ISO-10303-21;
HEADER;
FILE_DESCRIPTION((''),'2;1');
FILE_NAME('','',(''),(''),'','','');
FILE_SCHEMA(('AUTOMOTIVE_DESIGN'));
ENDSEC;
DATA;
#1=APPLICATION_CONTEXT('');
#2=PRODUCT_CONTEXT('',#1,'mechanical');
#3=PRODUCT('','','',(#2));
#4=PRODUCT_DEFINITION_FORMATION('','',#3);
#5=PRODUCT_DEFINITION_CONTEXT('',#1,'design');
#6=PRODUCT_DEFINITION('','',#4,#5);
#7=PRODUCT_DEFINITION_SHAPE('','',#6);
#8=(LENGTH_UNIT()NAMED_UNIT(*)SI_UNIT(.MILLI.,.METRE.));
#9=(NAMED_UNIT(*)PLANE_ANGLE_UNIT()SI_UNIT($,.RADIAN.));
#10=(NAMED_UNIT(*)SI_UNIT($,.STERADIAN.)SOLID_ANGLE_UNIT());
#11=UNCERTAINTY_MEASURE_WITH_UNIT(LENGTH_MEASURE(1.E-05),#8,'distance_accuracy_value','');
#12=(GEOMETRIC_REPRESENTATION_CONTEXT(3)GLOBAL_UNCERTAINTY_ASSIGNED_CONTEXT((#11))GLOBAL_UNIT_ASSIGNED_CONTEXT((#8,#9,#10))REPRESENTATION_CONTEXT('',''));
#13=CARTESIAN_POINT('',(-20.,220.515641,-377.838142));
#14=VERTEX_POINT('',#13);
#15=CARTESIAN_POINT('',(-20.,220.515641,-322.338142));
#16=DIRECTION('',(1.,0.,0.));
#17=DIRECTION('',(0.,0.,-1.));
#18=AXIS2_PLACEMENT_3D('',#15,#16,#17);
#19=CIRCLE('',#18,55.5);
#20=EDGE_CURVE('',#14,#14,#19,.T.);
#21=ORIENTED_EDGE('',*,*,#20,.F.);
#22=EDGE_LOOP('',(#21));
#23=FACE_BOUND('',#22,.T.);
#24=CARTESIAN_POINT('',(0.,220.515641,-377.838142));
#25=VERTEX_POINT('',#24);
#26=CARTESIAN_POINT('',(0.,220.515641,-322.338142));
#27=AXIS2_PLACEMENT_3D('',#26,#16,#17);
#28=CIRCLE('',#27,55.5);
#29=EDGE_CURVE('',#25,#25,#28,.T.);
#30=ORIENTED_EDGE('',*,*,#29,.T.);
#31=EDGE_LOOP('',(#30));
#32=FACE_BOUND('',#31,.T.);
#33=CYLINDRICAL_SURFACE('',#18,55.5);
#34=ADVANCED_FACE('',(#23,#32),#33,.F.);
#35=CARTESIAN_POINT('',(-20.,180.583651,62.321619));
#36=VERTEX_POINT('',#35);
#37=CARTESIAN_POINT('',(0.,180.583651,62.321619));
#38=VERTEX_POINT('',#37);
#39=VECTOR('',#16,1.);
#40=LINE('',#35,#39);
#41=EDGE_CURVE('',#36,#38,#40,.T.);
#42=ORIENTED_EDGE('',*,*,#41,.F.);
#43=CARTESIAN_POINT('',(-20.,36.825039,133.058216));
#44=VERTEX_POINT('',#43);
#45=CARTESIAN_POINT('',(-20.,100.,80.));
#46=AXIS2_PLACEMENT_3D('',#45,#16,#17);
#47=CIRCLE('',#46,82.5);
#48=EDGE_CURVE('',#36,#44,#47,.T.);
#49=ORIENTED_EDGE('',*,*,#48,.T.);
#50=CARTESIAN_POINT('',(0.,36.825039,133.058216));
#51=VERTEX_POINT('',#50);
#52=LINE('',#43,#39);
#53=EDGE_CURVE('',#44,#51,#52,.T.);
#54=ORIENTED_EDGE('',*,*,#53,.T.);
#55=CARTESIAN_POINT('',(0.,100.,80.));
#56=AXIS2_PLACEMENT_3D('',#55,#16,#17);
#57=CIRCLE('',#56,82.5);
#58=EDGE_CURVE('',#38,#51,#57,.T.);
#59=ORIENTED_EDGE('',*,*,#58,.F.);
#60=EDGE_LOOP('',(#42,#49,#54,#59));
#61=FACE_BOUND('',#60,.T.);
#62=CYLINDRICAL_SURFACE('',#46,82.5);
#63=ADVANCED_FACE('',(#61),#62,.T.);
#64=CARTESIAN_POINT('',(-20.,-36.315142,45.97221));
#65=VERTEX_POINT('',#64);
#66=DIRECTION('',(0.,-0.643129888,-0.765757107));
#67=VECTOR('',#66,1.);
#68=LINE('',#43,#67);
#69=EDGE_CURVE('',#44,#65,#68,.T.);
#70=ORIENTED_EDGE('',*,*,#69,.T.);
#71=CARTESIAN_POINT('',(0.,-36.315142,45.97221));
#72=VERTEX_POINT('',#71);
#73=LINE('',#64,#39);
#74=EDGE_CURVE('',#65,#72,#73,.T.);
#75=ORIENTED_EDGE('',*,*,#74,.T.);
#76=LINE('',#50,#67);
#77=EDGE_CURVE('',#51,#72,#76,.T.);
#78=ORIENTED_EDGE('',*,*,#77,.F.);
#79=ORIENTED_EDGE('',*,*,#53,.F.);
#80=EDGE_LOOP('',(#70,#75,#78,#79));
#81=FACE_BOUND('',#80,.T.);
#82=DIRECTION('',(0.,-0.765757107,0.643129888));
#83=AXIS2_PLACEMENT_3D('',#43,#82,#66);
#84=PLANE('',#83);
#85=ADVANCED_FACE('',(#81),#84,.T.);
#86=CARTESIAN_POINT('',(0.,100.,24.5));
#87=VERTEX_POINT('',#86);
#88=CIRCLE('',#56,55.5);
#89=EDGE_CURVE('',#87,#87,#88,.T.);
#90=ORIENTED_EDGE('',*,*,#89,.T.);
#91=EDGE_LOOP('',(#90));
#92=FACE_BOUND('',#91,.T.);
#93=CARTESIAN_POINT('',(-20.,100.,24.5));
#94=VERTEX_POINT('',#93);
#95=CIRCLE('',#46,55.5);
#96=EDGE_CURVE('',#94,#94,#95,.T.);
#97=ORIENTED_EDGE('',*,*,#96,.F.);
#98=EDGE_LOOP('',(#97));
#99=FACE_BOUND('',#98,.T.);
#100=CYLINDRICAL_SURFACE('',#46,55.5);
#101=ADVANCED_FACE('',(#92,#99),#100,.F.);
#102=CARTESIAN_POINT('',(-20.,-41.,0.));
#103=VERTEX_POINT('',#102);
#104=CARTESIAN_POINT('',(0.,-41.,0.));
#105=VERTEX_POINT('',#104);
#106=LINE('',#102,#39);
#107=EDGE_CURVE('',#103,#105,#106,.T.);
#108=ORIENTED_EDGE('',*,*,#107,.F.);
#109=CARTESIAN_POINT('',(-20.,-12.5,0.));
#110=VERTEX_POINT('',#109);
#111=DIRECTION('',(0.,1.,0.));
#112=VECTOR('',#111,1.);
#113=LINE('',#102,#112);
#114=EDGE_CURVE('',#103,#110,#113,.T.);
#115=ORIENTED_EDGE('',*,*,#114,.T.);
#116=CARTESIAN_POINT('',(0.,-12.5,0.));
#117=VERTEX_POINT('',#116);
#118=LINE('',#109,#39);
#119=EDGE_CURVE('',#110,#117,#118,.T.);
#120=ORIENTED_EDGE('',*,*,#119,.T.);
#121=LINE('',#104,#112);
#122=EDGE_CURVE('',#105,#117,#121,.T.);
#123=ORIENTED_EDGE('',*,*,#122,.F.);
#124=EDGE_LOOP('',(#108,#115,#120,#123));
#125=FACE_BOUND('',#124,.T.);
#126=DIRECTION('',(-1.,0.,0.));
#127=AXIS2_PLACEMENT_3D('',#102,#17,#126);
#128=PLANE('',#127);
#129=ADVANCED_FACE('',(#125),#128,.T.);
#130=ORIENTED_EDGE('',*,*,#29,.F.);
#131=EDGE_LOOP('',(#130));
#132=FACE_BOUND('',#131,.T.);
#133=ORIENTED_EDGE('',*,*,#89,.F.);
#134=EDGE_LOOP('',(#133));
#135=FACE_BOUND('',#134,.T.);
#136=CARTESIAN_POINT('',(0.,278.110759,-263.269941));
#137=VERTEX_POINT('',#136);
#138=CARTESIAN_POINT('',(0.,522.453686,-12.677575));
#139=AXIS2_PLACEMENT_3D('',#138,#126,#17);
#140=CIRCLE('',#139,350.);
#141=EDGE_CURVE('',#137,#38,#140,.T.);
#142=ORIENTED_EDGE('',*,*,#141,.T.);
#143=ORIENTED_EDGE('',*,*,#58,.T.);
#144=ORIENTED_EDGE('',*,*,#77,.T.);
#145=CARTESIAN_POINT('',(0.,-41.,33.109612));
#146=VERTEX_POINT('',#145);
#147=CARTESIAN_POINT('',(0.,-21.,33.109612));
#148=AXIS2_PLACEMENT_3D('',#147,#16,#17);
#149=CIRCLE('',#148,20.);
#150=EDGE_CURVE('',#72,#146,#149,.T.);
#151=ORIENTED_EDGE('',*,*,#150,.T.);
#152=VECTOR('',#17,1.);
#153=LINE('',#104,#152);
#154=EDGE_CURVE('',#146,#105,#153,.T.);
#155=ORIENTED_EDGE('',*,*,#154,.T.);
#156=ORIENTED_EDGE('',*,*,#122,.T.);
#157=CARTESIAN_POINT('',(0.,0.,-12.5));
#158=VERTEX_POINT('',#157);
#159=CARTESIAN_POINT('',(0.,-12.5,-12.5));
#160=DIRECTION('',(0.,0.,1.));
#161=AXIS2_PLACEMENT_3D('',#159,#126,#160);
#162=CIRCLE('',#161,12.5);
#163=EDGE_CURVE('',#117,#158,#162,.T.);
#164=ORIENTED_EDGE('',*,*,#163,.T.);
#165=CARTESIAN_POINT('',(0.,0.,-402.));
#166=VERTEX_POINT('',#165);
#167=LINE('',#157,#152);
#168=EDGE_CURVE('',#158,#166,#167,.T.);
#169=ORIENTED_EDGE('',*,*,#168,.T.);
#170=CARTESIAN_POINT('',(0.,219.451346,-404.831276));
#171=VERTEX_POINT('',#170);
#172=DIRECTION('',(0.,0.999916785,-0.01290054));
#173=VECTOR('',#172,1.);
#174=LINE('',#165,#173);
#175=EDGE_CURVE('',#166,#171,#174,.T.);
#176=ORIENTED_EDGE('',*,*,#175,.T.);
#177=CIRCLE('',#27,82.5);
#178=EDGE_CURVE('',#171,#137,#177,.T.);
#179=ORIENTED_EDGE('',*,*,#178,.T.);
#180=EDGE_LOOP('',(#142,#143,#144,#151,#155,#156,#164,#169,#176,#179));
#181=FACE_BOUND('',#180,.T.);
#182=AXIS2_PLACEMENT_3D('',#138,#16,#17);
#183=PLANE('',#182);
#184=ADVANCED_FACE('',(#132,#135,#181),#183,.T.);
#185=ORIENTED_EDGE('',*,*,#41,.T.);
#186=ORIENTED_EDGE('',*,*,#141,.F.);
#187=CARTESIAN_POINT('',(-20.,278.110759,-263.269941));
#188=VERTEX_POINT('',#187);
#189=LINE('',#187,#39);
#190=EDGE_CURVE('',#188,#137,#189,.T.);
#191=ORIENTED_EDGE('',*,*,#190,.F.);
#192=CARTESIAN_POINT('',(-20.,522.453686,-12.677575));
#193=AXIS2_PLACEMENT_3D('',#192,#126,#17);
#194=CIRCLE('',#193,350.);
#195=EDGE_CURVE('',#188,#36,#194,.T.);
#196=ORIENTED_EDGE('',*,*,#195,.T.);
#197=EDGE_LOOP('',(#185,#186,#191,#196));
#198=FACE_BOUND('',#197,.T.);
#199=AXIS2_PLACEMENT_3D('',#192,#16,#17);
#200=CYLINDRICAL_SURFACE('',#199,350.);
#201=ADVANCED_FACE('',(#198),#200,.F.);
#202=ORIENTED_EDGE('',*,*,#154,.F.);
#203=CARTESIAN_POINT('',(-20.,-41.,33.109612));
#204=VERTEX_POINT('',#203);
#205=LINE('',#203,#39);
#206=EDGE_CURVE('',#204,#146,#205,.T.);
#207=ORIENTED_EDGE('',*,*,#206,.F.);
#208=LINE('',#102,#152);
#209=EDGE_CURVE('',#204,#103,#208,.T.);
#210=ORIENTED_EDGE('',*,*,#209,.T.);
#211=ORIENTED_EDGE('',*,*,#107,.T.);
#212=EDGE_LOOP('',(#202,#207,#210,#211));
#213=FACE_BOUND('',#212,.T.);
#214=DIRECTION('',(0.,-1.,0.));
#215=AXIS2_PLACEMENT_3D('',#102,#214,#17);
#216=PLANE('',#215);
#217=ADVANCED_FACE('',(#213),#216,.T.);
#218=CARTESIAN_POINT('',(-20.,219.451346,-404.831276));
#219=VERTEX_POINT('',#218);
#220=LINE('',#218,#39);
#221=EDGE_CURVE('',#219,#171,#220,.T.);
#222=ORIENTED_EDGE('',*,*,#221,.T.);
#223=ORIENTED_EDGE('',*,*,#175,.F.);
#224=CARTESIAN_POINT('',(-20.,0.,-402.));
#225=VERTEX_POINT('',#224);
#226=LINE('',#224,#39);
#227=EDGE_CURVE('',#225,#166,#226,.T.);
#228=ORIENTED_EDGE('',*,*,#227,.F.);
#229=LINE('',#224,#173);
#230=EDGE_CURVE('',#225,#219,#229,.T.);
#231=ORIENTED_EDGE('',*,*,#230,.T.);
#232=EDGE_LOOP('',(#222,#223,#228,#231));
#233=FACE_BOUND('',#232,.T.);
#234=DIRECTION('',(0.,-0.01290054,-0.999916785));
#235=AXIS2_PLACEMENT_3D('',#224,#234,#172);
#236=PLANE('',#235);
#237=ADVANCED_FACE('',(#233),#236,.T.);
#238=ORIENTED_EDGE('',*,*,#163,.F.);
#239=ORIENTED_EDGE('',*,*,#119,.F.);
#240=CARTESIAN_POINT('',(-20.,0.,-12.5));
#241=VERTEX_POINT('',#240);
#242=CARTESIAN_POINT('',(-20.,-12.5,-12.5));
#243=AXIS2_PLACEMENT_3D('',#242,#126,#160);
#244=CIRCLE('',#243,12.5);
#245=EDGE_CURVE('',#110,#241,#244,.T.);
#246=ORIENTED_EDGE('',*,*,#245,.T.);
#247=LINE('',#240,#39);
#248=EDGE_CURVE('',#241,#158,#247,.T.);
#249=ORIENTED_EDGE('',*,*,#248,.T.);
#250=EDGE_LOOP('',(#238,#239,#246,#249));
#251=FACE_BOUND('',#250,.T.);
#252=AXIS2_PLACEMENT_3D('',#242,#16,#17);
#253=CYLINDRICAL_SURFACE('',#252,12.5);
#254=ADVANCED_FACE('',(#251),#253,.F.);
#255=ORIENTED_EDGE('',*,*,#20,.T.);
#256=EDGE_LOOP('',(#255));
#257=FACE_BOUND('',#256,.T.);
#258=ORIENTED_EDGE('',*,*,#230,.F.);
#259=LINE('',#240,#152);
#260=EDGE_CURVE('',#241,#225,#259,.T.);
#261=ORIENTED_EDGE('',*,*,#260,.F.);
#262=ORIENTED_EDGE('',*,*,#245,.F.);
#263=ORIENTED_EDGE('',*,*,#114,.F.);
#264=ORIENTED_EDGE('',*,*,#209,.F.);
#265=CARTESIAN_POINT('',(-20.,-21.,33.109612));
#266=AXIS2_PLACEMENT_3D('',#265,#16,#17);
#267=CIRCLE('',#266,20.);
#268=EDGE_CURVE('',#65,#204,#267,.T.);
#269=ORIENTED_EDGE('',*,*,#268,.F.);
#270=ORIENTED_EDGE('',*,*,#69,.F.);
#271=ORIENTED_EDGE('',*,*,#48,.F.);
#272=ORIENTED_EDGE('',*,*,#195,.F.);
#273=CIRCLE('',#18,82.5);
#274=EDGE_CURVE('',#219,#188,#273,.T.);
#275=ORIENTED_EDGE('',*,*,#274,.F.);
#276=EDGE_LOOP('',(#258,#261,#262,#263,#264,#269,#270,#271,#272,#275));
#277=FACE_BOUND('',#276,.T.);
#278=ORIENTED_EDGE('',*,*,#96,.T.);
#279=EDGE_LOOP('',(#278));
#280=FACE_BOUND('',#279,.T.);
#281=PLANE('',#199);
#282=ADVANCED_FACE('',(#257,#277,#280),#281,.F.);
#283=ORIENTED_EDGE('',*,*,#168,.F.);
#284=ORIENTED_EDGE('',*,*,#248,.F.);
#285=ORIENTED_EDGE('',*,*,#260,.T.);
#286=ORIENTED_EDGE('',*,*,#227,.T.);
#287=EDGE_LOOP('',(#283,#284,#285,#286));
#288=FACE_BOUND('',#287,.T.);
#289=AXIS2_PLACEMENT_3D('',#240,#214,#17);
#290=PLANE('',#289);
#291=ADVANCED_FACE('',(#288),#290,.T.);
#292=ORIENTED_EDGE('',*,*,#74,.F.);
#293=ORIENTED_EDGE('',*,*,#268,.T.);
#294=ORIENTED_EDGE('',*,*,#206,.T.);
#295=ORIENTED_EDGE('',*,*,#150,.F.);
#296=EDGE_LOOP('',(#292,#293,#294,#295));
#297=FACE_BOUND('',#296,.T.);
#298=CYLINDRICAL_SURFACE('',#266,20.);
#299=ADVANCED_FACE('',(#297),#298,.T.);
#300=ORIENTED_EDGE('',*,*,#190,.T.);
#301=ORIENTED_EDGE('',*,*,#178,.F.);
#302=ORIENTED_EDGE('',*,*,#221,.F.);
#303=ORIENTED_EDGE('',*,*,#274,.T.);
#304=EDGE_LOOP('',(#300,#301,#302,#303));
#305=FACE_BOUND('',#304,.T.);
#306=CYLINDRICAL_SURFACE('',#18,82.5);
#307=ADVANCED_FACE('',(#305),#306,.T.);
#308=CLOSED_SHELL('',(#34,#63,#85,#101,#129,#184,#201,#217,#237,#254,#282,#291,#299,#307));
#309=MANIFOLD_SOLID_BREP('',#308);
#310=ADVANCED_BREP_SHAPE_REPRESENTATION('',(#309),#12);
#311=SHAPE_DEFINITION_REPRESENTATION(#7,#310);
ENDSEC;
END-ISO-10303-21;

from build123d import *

# Parameters (mm, degrees)
SKETCH1_R          = 55.5
BASE_FLANGE1_DEPTH = 20


# Sheet-metal steps are written as plain solids
with BuildPart() as part:
    # Sketch1 → Base-Flange1 (new body)
    with BuildSketch(Plane(origin=(0, 0, 0), x_dir=(0, 0, -1), z_dir=(1, 0, 0))):
        with BuildLine():
            Line((0, -41), (0, -12.5))
            ThreePointArc((0, -12.5), (3.661165235, -3.661165235), (12.5, 0))
            Line((12.5, 0), (402, 0))
            Line((402, 0), (404.831276436, 219.451346471))
            ThreePointArc((404.831276436, 219.451346471), (353.919996754, 296.731364001), (263.269941068, 278.110759489))
            ThreePointArc((263.269941068, 278.110759489), (113.107275555, 187.171901633), (-62.321618696, 180.583651161))
            ThreePointArc((-62.321618696, 180.583651161), (-154.024103093, 136.42364838), (-133.058215758, 36.825038658))
            Line((-133.058215758, 36.825038658), (-45.972209781, -36.315142143))
            ThreePointArc((-45.972209781, -36.315142143), (-39.95421417, -39.792323471), (-33.109612021, -41))
            Line((-33.109612021, -41), (0, -41))
        make_face()
        with Locations((-80, 100)):
            Circle(SKETCH1_R, mode=Mode.SUBTRACT)
        with Locations((322.338141708, 220.515641005)):
            Circle(SKETCH1_R, mode=Mode.SUBTRACT)
    extrude(amount=-BASE_FLANGE1_DEPTH)


solid = part.part
